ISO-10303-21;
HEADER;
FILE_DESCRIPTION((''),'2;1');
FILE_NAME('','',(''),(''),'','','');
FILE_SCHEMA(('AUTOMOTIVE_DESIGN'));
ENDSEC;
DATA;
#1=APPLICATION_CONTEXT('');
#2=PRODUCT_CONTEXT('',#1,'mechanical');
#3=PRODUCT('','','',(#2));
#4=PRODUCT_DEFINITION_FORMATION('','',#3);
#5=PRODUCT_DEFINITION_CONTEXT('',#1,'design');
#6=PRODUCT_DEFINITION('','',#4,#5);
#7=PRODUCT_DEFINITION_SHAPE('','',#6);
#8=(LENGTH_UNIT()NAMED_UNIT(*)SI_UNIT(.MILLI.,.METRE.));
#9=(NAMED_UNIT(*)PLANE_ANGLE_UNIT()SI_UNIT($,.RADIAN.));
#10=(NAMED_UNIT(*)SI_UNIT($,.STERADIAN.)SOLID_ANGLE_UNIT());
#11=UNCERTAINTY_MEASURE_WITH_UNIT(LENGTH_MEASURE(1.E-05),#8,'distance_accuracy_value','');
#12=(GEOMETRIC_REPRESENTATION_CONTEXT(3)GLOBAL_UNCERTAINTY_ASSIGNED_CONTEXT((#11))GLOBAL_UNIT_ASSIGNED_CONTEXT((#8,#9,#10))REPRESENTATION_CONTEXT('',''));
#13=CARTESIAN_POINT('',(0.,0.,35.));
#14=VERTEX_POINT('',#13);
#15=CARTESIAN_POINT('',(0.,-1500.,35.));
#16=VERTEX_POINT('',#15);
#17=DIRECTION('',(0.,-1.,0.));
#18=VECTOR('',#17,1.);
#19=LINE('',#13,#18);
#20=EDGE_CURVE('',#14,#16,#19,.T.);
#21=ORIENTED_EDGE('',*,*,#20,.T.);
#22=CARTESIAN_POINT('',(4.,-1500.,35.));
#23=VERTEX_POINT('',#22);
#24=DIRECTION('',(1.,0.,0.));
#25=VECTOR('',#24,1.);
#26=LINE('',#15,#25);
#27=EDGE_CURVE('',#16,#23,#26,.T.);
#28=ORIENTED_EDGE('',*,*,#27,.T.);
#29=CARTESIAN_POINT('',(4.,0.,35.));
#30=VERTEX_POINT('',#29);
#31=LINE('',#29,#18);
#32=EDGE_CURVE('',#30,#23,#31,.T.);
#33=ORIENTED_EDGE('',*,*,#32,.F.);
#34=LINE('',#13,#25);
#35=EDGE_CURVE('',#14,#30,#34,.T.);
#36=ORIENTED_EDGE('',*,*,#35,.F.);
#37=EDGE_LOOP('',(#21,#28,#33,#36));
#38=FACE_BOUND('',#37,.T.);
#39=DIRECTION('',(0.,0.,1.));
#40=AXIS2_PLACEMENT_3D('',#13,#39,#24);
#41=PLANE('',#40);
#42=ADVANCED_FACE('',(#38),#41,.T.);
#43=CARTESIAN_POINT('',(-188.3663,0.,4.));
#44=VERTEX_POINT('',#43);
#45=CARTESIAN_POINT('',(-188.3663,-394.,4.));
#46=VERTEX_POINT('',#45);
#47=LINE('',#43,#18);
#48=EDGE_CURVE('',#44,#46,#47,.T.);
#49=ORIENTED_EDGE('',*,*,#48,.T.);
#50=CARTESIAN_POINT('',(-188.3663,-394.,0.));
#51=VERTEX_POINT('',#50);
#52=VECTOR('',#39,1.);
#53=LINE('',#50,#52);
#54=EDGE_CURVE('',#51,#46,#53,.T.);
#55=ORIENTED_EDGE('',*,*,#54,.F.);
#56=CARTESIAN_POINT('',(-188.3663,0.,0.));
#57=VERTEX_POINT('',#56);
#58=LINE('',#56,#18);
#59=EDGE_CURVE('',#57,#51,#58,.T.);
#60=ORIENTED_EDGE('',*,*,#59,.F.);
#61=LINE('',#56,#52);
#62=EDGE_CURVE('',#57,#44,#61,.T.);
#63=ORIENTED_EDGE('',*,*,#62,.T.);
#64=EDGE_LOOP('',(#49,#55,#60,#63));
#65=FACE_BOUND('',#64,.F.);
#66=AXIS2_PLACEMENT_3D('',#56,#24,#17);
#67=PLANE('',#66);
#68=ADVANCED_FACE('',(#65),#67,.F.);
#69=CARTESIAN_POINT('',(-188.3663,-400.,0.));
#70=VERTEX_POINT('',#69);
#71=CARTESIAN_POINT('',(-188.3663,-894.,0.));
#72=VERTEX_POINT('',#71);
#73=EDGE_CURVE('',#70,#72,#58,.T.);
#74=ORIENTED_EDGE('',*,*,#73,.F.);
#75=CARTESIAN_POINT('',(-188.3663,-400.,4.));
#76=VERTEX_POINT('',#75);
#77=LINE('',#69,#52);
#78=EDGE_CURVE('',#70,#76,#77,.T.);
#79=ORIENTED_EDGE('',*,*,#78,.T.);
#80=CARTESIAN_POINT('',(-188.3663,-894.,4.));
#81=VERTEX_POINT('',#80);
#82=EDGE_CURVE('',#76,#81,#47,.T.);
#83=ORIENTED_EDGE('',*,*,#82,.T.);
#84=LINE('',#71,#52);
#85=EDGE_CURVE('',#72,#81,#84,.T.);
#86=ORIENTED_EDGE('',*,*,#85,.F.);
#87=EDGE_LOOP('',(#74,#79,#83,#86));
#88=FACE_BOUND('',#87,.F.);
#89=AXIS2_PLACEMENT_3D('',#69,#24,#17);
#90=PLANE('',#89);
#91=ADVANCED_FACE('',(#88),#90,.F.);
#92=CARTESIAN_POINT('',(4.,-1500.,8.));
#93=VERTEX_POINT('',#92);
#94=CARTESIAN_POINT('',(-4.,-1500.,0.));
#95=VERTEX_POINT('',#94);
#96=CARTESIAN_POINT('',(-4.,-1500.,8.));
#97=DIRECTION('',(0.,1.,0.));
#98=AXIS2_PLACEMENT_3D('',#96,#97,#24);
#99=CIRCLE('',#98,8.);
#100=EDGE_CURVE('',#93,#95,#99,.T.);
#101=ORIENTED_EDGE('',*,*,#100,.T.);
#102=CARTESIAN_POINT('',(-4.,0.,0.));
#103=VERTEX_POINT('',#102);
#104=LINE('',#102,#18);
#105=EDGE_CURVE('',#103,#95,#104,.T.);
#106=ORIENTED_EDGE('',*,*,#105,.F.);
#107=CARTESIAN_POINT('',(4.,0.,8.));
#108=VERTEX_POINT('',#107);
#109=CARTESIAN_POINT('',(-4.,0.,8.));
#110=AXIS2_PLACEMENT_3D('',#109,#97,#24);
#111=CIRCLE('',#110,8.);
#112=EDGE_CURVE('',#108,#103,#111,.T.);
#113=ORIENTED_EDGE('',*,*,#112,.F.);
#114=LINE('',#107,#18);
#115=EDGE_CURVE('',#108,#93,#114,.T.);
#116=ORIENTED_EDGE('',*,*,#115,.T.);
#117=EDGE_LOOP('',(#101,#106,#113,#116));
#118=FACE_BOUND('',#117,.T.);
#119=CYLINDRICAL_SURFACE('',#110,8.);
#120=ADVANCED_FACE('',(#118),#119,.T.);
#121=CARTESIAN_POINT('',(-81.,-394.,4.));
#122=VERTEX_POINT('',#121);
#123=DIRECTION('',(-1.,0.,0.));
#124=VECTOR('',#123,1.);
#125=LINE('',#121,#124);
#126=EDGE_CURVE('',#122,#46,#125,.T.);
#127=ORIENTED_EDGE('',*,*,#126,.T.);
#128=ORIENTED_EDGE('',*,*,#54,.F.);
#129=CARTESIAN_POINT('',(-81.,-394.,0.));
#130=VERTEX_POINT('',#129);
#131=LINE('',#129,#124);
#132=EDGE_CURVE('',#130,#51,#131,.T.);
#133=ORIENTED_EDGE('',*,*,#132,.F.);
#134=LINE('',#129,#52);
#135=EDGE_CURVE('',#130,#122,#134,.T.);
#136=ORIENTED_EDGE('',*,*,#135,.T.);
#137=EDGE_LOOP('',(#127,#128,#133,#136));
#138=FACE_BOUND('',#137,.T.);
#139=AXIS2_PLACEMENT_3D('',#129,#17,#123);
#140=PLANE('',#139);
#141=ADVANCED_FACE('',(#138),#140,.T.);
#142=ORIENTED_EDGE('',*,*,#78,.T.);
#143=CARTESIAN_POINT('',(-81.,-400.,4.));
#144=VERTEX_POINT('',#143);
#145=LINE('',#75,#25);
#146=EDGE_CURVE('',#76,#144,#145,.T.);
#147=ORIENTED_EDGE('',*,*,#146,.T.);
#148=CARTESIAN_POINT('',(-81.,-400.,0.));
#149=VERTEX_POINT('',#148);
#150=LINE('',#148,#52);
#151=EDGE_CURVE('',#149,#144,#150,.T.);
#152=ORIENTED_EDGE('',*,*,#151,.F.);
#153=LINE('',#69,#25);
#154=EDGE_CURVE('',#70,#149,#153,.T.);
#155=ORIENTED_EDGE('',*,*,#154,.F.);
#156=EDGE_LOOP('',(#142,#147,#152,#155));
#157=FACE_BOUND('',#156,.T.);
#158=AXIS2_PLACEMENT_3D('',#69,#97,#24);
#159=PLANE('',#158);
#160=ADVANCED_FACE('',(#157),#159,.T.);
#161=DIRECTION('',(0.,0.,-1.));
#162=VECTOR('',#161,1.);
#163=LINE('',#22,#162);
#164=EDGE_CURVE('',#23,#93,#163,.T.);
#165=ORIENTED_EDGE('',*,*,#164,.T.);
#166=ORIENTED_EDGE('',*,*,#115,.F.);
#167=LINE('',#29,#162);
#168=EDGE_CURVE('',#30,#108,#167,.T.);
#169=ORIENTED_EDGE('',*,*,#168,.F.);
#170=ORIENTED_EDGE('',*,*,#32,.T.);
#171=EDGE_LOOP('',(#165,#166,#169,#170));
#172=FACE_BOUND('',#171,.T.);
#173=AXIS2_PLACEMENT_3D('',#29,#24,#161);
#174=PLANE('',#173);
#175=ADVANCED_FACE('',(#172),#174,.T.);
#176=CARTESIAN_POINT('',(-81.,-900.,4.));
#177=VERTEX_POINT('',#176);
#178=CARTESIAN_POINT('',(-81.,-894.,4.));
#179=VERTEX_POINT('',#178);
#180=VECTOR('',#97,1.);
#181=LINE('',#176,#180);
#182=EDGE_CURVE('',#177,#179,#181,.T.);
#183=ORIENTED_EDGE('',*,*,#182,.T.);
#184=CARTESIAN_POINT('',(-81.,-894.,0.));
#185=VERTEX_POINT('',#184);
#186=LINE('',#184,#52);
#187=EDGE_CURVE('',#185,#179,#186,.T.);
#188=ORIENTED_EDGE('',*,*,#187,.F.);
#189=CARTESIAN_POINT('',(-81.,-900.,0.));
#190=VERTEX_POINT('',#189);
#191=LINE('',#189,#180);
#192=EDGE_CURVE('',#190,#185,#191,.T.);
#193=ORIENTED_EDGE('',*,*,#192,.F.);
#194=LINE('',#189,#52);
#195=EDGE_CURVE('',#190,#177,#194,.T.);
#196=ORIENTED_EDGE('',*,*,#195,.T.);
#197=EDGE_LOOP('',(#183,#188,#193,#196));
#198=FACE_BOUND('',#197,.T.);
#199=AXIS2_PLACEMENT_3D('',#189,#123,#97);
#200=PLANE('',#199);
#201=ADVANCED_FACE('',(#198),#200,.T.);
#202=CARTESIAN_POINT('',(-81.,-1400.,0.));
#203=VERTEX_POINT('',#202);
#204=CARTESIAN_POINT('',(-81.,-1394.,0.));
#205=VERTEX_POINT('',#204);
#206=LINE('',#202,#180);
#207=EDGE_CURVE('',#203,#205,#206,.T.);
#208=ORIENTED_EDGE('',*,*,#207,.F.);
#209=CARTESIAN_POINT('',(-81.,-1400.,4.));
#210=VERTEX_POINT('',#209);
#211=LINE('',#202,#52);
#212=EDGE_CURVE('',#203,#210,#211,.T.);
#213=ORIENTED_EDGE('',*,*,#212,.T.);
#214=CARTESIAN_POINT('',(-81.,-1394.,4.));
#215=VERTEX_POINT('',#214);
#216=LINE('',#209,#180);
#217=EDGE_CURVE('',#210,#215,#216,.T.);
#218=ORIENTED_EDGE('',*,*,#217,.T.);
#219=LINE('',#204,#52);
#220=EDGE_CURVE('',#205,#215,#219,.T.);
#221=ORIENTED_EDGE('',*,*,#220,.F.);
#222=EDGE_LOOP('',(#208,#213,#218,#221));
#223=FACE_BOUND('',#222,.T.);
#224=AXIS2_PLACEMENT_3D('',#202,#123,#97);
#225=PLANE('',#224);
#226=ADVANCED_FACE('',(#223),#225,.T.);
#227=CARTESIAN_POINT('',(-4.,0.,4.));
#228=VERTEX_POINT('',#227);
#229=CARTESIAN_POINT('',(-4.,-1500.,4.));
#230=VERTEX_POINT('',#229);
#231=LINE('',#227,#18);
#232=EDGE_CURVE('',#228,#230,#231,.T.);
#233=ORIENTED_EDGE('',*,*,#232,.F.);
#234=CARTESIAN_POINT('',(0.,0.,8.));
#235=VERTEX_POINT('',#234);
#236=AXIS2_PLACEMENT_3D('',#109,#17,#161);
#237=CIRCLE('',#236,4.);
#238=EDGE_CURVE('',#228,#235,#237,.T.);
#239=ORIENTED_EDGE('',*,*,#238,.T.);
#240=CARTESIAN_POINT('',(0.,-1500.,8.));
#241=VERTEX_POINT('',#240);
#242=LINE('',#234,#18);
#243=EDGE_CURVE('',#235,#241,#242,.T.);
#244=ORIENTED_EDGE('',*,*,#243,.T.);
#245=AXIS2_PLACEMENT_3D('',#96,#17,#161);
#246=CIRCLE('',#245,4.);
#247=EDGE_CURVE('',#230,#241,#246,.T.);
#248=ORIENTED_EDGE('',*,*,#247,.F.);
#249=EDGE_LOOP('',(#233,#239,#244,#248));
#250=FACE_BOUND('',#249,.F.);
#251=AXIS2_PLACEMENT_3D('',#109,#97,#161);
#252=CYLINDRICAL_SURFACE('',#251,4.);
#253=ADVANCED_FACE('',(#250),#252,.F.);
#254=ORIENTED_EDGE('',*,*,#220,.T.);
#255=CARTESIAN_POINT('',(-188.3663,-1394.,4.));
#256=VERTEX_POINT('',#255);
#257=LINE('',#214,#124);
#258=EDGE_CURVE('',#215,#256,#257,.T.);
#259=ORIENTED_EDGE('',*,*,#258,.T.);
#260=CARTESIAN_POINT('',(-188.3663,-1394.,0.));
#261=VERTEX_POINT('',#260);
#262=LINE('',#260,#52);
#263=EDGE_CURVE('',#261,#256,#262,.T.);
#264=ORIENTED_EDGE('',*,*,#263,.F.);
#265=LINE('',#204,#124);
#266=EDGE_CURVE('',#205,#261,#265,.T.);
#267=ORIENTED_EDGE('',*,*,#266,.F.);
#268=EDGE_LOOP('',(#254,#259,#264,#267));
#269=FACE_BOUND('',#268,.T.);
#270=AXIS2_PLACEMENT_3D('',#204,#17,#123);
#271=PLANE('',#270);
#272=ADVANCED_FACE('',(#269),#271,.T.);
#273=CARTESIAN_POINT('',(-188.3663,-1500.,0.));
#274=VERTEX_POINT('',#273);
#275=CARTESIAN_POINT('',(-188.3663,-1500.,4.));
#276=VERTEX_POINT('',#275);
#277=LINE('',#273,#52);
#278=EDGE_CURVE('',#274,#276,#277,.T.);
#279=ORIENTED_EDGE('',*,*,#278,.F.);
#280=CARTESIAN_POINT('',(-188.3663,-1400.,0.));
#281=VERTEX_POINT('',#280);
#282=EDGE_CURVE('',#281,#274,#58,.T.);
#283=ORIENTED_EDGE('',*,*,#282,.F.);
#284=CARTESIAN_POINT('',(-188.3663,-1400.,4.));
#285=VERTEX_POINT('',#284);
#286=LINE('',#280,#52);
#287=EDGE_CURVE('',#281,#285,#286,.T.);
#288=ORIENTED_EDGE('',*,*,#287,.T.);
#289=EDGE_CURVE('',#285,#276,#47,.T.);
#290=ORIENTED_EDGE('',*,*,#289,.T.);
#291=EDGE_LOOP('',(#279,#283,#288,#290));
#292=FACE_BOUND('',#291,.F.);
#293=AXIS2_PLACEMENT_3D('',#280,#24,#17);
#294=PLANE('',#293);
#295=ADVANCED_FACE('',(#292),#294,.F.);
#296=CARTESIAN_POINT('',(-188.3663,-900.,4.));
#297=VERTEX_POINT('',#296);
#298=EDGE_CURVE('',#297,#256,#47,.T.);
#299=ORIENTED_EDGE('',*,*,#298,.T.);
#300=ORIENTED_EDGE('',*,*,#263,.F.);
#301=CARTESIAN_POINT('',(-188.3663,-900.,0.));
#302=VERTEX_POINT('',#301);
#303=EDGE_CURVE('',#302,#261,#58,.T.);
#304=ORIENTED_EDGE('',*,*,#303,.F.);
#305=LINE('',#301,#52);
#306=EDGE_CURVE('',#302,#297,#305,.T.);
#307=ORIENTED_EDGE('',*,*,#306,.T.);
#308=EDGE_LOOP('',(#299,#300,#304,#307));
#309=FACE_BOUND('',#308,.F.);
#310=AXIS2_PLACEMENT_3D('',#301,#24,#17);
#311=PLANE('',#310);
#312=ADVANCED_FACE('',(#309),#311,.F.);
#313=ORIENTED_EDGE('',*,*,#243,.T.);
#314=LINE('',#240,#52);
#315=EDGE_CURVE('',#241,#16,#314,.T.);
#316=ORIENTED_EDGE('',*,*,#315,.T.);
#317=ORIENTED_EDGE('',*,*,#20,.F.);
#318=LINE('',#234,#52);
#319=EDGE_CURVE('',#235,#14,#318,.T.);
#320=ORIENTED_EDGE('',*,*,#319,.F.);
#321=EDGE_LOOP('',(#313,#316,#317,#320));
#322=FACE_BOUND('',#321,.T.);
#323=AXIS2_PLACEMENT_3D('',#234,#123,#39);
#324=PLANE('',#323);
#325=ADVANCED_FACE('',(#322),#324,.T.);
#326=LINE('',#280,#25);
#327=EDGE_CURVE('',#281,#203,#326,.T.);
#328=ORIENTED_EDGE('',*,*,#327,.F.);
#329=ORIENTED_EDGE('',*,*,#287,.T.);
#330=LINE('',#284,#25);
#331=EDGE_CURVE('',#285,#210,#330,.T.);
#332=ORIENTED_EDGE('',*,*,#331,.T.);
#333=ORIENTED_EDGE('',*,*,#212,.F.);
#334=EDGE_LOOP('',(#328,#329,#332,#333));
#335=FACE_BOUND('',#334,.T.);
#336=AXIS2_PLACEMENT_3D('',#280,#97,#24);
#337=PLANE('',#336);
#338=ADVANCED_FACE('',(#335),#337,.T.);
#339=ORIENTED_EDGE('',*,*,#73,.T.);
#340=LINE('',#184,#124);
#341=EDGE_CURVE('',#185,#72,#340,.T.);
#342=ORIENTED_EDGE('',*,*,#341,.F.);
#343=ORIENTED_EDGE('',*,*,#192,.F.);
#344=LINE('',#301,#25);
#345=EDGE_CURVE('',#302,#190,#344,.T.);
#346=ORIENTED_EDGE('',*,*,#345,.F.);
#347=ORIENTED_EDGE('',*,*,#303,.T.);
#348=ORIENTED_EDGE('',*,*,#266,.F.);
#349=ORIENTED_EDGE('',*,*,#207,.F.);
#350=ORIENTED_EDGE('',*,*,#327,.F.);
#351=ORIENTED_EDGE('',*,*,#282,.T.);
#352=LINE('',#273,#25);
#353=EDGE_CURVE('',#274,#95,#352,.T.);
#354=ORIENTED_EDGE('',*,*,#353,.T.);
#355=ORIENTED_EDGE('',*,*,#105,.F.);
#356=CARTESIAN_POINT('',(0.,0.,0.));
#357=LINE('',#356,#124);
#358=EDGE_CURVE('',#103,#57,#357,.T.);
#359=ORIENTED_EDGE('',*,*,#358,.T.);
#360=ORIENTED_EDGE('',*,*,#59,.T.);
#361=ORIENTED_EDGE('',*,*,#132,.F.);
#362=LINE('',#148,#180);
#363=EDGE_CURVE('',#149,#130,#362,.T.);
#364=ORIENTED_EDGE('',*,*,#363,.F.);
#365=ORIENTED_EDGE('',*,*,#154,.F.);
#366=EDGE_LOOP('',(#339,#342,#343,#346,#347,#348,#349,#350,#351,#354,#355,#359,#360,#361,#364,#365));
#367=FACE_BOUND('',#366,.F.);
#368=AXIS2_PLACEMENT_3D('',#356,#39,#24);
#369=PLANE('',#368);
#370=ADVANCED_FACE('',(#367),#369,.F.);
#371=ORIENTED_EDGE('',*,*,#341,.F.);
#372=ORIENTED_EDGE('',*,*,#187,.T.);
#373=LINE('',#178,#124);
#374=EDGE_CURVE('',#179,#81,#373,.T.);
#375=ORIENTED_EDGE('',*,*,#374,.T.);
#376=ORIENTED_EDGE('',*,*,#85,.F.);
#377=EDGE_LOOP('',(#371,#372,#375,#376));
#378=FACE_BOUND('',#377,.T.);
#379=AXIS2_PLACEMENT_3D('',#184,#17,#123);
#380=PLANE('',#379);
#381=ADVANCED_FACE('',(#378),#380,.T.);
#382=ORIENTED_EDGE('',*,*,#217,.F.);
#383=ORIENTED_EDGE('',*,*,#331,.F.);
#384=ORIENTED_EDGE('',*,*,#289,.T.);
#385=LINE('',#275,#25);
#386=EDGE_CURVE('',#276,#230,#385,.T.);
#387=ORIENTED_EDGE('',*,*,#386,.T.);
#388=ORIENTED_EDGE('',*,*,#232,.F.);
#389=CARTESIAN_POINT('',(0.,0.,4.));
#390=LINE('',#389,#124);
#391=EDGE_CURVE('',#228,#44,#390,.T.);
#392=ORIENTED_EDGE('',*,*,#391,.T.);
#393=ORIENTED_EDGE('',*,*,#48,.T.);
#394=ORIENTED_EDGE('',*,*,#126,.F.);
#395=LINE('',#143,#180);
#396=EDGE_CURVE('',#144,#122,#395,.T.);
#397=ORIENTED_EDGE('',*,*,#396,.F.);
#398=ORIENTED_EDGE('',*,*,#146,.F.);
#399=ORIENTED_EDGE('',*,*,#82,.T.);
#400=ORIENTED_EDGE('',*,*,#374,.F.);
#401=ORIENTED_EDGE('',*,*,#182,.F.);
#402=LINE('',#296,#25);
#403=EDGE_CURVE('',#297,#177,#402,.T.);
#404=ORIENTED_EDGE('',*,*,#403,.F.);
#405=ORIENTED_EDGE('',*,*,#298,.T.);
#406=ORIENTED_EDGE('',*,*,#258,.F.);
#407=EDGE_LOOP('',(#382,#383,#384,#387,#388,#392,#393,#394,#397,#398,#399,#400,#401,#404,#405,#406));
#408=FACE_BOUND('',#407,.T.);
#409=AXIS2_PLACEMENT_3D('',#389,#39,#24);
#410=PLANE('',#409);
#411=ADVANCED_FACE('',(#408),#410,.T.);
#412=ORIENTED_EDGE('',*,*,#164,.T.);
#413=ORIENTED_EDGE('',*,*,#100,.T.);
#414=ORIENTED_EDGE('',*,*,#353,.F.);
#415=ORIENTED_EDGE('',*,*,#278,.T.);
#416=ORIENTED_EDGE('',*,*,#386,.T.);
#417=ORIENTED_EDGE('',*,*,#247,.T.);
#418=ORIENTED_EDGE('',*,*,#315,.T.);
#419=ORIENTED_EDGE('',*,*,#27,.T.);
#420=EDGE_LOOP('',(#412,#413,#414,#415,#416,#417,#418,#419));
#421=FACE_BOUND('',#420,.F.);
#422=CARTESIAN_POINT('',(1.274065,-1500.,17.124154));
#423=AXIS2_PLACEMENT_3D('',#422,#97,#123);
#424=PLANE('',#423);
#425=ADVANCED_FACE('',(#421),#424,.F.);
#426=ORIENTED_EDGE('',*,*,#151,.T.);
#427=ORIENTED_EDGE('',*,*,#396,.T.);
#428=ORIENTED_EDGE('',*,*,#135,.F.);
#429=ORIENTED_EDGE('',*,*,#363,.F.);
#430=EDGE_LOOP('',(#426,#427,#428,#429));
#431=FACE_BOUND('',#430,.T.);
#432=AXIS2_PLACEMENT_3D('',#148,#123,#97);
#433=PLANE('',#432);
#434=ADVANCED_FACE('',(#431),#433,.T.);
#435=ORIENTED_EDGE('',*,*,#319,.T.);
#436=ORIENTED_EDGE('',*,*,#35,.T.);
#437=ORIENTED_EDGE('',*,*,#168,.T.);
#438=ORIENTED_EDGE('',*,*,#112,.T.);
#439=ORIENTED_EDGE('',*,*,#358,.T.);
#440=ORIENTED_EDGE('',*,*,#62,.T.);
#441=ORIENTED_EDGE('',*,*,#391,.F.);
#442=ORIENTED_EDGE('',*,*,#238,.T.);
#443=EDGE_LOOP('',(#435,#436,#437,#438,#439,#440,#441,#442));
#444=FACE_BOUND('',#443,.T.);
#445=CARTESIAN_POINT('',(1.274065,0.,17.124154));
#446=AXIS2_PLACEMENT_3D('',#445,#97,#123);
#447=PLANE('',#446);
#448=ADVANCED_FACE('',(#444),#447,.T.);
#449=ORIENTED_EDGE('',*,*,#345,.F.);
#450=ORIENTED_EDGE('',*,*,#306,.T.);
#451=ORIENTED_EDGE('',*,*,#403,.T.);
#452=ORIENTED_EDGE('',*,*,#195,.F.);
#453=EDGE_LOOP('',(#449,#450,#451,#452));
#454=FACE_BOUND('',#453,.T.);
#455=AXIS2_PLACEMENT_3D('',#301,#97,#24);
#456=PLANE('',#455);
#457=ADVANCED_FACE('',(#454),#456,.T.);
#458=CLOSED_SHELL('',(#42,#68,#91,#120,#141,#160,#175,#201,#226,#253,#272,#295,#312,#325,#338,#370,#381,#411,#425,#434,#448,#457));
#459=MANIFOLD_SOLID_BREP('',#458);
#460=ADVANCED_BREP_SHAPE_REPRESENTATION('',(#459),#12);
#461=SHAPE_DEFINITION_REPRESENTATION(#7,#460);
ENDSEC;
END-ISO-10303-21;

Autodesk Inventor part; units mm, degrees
ref_plane "YZ Plane" through (0, 0, 0) normal (1, 0, 0) x (0, 1, 0)
ref_plane "XZ Plane" through (0, 0, 0) normal (0, 1, 0) x (-1, 0, 0)
ref_plane "XY Plane" through (0, 0, 0) normal (0, 0, 1) x (1, 0, 0)
sketch "Sketch1" plane through (0, 0, 0) normal (0, 0, 1) x (1, 0, 0)
  line L0 (0, 0) -> (-188.3663, 0)
  line L1 (-188.3663, 0) -> (-188.3663, -1500)
  line L2 (-188.3663, -1500) -> (0, -1500)
  line L3 (0, -1500) -> (0, 0)
  line L4 (-188.3663, -1400) -> (-81, -1400)
  line L5 (-81, -1400) -> (-81, -1394)
  line L6 (-81, -1394) -> (-188.3663, -1394)
  line L7 (-188.3663, -1394) -> (-188.3663, -1400)
  line L8 (-188.3663, -900) -> (-81, -900)
  line L9 (-81, -900) -> (-81, -894)
  line L10 (-81, -894) -> (-188.3663, -894)
  line L11 (-188.3663, -894) -> (-188.3663, -900)
  line L12 (-188.3663, -400) -> (-81, -400)
  line L13 (-81, -400) -> (-81, -394)
  line L14 (-81, -394) -> (-188.3663, -394)
  line L15 (-188.3663, -394) -> (-188.3663, -400)
  dimension "d0" = 1500
  dimension "d1" = 188.3663
  dimension "d2" = 6
  dimension "d4" = 100
  dimension "d7" = 500
  dimension "d23" = 81
extrude "Plate1" add sketch "Sketch1" along normal blind 4 contours L3 L2 L1 L4 L5 L6 L8 L9 L10 L12 L13 L14 L0
sketch "Sketch2" plane through (4, 0, 0) normal (-1, 0, 0) x (0, -1, 0)
  line L0 (1500, 0) -> (0, 0)
  line L1 (0, 0) -> (0, 35)
  line L2 (0, 35) -> (1500, 35)
  line L3 (1500, 35) -> (1500, 0)
edge flange "Flange1" height 35 angle 90 thickness 4 bend radius 4 thickness toward (-1, 0, 0) relief tear relief width 4 relief depth 2 edges at (0, -750, 4) wall of the first edge with corners at (4, -1500, 0) (4, 0, 0) (4, 0, 35) (4, -1500, 35)
bend "Bend1"
corner "Corner1"
equation "\"d1\" = Stringer1_deep"
equation "\"d12\" = Thickness"
equation "\"d13\" = BendReliefWidth"
equation "\"d14\" = BendReliefDepth"
equation "\"d15\" = MinimumRemnant"
equation "\"d16\" = TransitionRadius"
equation "\"d19\" = BendRadius"
equation "\"d20\" = CornerReliefSize"
equation "\"d21\" = GapSize"
equation "\"d22\" = JacobiRadiusSize"
equation "\"BendRadius\" = Thickness"
equation "\"BendReliefWidth\" = Thickness"
equation "\"BendReliefDepth\" = 0.5 * Thickness"
equation "\"CornerReliefSize\" = 4 * Thickness"
equation "\"MinimumRemnant\" = 2 * Thickness"
equation "\"TransitionRadius\" = BendRadius"
equation "\"JacobiRadiusSize\" = BendRadius"
equation "\"GapSize\" = Thickness"
equation "\"Stringer1_deep\" = 188.366314"
equation "\"Thickness\" = 4"
properties part number "stringer 1" material "Steel"
